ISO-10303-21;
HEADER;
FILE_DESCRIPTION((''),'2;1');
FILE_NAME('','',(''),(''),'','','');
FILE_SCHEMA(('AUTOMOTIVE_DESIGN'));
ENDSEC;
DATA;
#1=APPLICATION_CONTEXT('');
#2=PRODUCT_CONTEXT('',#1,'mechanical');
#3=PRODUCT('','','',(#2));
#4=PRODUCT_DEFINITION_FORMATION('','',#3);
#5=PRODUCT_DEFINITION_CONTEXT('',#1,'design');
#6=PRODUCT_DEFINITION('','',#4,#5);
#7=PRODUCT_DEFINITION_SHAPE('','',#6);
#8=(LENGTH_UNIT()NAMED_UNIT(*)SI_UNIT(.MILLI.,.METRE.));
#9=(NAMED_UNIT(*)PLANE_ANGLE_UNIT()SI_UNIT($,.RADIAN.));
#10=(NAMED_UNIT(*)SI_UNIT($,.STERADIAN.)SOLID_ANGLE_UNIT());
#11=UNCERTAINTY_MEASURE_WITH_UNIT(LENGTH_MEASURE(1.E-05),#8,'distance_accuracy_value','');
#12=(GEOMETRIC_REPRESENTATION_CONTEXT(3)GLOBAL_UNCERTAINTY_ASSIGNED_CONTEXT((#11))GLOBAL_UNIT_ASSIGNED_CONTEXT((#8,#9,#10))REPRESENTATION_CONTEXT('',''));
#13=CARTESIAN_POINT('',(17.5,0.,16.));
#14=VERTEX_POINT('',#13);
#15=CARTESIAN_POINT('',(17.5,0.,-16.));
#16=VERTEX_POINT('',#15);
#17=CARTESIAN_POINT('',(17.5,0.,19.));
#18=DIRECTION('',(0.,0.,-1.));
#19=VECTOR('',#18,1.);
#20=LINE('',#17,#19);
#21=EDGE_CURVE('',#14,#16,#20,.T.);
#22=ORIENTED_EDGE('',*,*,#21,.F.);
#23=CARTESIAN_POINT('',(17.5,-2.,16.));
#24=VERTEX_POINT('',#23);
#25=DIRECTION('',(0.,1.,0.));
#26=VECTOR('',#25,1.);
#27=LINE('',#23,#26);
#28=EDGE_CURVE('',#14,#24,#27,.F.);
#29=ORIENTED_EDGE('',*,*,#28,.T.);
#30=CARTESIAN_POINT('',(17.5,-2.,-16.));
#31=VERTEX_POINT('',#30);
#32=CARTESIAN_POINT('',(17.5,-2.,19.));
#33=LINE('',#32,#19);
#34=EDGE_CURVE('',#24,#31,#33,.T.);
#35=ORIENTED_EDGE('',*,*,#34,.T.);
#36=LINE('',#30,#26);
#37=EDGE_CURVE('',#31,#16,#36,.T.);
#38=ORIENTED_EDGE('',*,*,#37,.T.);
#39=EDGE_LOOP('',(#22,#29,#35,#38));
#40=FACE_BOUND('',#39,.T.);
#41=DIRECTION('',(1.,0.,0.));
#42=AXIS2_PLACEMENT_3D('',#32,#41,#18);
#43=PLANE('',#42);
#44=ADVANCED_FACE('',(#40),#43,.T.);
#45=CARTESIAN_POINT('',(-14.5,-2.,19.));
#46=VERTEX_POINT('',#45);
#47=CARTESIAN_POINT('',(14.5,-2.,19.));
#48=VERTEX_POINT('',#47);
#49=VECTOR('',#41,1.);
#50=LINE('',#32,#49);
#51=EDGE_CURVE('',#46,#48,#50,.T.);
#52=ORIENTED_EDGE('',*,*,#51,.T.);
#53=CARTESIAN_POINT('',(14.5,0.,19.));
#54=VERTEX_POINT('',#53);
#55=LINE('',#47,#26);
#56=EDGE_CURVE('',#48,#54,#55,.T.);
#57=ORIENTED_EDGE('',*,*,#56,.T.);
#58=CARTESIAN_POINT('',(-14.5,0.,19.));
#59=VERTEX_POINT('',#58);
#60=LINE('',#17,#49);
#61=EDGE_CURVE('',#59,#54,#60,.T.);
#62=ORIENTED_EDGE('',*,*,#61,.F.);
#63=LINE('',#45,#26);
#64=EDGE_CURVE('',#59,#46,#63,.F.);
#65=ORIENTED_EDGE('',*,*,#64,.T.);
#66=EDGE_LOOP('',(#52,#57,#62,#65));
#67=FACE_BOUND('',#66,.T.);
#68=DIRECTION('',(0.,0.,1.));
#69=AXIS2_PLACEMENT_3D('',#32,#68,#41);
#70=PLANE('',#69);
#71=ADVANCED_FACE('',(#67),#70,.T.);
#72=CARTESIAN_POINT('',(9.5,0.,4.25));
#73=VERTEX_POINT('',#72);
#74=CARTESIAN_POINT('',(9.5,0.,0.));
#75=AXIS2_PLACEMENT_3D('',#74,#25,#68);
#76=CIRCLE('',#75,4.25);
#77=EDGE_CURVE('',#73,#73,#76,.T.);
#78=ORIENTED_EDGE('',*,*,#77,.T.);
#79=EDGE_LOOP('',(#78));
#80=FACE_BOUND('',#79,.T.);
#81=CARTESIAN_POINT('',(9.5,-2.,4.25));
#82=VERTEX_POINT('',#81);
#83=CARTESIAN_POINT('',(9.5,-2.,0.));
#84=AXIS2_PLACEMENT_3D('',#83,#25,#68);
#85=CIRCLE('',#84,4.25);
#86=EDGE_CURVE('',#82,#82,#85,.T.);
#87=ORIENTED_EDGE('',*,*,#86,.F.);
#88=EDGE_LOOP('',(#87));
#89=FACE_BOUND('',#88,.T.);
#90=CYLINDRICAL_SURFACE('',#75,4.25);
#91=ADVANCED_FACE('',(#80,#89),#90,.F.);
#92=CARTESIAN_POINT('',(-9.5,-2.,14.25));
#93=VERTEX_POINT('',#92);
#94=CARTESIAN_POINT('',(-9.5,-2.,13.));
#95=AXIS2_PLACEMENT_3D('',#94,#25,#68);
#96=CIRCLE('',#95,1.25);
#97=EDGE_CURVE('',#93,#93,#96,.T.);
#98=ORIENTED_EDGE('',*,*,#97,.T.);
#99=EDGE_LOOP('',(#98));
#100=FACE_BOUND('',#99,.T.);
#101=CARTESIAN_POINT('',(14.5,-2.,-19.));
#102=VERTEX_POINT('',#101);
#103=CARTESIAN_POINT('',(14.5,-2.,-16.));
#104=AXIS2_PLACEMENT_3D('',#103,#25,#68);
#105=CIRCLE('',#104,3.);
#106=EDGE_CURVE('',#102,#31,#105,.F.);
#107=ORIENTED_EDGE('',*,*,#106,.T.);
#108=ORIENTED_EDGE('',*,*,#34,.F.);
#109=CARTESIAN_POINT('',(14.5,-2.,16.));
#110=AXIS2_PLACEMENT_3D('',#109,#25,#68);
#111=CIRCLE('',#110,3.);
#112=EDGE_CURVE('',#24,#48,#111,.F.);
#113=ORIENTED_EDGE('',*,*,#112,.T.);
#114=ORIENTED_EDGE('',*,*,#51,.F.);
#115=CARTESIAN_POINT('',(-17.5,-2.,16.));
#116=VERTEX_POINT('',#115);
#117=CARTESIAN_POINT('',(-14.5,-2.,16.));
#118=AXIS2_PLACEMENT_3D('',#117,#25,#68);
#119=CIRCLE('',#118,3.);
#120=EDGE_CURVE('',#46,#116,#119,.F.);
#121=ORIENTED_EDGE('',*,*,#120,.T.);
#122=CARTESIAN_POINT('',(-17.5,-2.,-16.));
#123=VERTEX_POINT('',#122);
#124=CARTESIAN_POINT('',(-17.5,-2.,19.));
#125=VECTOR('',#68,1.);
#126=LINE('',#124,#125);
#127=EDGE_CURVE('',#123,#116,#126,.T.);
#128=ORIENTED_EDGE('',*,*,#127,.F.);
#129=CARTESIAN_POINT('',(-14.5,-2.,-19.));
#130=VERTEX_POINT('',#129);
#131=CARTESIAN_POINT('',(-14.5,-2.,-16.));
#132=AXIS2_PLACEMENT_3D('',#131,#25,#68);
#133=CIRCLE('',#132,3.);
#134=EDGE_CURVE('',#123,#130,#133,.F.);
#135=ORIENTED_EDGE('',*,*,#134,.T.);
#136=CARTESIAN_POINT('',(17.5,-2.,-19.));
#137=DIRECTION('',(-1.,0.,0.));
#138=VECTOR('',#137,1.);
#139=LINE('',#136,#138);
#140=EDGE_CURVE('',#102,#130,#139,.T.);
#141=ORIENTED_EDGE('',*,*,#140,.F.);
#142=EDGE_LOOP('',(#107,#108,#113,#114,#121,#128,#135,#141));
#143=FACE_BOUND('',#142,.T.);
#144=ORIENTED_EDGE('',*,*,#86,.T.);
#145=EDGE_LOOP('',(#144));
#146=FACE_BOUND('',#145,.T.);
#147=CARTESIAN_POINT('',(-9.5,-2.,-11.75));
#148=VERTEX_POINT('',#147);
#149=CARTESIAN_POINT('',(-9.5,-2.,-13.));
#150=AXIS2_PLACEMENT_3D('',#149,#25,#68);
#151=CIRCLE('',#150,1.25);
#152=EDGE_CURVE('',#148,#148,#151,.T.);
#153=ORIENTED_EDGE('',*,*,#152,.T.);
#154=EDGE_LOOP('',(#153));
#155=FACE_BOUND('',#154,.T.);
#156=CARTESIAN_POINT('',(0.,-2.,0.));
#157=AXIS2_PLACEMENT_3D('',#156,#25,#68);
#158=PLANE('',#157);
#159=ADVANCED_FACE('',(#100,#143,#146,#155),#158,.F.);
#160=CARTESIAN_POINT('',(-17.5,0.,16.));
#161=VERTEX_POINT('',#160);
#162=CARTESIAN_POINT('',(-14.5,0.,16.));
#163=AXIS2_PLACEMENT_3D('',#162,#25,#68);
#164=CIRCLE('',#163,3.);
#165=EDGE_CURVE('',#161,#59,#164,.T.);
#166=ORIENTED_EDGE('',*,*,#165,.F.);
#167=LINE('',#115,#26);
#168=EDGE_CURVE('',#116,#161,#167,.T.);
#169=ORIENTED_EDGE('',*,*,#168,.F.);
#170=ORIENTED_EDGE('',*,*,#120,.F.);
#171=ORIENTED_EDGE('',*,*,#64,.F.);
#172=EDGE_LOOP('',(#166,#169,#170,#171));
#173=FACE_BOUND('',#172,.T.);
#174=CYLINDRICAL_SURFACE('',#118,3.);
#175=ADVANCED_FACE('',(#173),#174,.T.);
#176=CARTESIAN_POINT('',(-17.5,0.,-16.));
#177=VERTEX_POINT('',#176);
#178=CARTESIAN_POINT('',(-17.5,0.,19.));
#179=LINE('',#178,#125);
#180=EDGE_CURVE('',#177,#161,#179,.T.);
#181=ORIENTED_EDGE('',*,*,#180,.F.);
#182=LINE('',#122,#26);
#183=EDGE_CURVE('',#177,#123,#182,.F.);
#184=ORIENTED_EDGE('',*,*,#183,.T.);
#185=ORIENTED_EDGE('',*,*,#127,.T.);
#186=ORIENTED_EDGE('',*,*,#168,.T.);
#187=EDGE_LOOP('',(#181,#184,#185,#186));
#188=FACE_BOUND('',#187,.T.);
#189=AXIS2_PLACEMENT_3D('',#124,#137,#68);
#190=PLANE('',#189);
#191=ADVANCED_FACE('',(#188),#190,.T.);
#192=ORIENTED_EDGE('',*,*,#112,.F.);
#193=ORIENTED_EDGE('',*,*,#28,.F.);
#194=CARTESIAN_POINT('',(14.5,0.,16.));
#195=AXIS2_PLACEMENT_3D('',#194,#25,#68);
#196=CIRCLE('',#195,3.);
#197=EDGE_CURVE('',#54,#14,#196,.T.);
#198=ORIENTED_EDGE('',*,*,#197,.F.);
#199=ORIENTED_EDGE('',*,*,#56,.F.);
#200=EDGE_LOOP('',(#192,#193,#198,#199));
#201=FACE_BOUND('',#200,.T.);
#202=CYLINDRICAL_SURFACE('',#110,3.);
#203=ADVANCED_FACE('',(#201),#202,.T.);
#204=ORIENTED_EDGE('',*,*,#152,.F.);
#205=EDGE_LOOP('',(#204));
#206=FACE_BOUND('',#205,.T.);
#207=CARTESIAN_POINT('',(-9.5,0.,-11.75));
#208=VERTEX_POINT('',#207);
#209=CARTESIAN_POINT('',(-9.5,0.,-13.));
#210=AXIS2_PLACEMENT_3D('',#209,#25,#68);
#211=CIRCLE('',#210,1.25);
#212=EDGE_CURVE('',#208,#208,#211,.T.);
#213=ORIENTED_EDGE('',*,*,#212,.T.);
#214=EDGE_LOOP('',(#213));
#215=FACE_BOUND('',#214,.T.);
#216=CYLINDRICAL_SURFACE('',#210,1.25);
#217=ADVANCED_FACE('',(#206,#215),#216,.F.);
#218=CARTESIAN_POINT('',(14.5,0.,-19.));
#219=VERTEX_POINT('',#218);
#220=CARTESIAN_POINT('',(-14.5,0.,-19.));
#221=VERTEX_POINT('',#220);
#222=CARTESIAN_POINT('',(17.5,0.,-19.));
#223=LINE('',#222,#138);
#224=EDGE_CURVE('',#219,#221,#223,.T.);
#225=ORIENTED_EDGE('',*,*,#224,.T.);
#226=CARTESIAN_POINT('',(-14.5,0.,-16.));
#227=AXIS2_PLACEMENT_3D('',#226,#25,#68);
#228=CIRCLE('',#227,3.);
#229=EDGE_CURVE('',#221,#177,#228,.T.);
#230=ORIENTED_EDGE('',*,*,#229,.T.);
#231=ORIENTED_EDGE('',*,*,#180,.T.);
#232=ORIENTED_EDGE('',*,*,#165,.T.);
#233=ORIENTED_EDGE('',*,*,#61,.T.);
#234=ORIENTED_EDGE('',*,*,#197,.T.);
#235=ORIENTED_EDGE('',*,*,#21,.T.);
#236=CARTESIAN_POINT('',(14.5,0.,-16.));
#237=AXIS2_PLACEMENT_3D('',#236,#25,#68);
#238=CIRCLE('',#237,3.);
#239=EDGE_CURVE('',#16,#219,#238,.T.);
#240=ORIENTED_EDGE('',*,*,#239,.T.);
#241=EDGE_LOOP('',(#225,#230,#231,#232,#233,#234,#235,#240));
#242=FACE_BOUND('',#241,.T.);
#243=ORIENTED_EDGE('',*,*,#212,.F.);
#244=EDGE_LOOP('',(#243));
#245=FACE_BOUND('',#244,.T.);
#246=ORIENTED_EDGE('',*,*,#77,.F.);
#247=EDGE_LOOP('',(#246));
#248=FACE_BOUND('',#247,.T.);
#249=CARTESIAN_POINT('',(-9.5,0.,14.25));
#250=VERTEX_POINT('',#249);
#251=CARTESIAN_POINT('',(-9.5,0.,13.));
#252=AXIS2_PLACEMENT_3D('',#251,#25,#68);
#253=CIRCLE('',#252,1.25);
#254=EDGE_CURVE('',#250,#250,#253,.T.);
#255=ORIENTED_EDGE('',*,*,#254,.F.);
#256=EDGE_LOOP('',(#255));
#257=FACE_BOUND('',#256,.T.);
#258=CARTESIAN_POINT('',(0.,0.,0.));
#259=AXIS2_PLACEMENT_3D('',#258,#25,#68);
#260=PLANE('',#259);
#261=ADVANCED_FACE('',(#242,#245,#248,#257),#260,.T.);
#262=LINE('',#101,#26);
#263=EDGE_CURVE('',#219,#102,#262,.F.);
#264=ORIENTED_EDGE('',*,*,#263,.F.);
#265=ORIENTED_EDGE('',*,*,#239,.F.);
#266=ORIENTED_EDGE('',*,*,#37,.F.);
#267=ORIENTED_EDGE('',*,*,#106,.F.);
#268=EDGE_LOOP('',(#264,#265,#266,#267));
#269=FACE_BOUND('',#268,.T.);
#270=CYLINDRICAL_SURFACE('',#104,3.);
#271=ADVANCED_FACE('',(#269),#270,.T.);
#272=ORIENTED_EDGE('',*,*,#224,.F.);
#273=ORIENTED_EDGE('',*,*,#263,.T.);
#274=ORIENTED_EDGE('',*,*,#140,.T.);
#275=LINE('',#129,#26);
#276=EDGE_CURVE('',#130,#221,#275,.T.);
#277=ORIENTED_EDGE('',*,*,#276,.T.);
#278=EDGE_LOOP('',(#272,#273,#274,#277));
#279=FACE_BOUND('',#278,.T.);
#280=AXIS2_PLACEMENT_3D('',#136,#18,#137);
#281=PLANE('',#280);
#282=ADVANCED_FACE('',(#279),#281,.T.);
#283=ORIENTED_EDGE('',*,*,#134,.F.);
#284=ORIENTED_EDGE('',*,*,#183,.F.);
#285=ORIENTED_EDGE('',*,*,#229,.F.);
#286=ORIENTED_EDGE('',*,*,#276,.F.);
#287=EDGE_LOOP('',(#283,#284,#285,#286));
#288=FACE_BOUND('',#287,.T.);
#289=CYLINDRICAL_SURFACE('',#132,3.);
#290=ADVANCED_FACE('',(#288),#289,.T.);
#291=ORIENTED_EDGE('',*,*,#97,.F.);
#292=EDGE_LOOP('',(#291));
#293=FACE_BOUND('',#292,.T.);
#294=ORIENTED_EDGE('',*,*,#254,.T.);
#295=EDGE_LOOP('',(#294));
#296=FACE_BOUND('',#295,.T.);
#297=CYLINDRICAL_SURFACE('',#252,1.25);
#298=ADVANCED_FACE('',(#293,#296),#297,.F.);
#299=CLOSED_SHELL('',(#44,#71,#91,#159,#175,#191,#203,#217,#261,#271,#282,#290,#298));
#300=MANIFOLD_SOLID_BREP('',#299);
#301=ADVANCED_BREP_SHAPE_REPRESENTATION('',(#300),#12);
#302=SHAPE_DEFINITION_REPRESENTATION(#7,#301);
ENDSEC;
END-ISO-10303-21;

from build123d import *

# Parameters (mm, degrees)
SKETCH1_W                        = 35
SKETCH1_H                        = 38
BASE_FLANGE1_DEPTH               = 2
TAP_DRILL_FOR_M3X0_5_TAP1_D      = 2.5
FILLET1_R                        = 3
TAP_DRILL_FOR_M10X1_5_TAP1_D     = 8.5
TAP_DRILL_FOR_M10X1_5_TAP1_DEPTH = 5
TAP_DRILL_FOR_M10X1_5_TAP1_TIP   = 2.553657631


# Sheet-metal steps are written as plain solids
with BuildPart() as part:
    # Sketch1 → Base-Flange1 (new body)
    with BuildSketch(Plane(origin=(0, 0, 0), x_dir=(1, 0, 0), z_dir=(0, 1, 0))):
        Rectangle(SKETCH1_W, SKETCH1_H)
    extrude(amount=-BASE_FLANGE1_DEPTH)

    # Tap Drill for M3x0.5 Tap1 (through all)
    with Locations(Plane(origin=(0, 0, 0), x_dir=(1, 0, 0), z_dir=(0, 1, 0))):
        with Locations((-9.5, -13), (-9.5, 13)):
            Hole(TAP_DRILL_FOR_M3X0_5_TAP1_D / 2)

    # Fillet1
    fillet1_edges = [part.edges().sort_by_distance(p)[0] for p in [
        (-17.5, -1, -19),
        (17.5, -1, -19),
        (17.5, -1, 19),
        (-17.5, -1, 19),
    ]]
    fillet(fillet1_edges, radius=FILLET1_R)

    # Tap Drill for M10x1.5 Tap1
    with Locations(Plane(origin=(0, 0, 0), x_dir=(1, 0, 0), z_dir=(0, 1, 0))):
        with Locations((9.5, 0)):
            Hole(TAP_DRILL_FOR_M10X1_5_TAP1_D / 2, depth=TAP_DRILL_FOR_M10X1_5_TAP1_DEPTH)
            with Locations((0, 0, -(TAP_DRILL_FOR_M10X1_5_TAP1_DEPTH + TAP_DRILL_FOR_M10X1_5_TAP1_TIP / 2))):  # 118° drill point
                Cone(0, TAP_DRILL_FOR_M10X1_5_TAP1_D / 2, TAP_DRILL_FOR_M10X1_5_TAP1_TIP, mode=Mode.SUBTRACT)


solid = part.part
